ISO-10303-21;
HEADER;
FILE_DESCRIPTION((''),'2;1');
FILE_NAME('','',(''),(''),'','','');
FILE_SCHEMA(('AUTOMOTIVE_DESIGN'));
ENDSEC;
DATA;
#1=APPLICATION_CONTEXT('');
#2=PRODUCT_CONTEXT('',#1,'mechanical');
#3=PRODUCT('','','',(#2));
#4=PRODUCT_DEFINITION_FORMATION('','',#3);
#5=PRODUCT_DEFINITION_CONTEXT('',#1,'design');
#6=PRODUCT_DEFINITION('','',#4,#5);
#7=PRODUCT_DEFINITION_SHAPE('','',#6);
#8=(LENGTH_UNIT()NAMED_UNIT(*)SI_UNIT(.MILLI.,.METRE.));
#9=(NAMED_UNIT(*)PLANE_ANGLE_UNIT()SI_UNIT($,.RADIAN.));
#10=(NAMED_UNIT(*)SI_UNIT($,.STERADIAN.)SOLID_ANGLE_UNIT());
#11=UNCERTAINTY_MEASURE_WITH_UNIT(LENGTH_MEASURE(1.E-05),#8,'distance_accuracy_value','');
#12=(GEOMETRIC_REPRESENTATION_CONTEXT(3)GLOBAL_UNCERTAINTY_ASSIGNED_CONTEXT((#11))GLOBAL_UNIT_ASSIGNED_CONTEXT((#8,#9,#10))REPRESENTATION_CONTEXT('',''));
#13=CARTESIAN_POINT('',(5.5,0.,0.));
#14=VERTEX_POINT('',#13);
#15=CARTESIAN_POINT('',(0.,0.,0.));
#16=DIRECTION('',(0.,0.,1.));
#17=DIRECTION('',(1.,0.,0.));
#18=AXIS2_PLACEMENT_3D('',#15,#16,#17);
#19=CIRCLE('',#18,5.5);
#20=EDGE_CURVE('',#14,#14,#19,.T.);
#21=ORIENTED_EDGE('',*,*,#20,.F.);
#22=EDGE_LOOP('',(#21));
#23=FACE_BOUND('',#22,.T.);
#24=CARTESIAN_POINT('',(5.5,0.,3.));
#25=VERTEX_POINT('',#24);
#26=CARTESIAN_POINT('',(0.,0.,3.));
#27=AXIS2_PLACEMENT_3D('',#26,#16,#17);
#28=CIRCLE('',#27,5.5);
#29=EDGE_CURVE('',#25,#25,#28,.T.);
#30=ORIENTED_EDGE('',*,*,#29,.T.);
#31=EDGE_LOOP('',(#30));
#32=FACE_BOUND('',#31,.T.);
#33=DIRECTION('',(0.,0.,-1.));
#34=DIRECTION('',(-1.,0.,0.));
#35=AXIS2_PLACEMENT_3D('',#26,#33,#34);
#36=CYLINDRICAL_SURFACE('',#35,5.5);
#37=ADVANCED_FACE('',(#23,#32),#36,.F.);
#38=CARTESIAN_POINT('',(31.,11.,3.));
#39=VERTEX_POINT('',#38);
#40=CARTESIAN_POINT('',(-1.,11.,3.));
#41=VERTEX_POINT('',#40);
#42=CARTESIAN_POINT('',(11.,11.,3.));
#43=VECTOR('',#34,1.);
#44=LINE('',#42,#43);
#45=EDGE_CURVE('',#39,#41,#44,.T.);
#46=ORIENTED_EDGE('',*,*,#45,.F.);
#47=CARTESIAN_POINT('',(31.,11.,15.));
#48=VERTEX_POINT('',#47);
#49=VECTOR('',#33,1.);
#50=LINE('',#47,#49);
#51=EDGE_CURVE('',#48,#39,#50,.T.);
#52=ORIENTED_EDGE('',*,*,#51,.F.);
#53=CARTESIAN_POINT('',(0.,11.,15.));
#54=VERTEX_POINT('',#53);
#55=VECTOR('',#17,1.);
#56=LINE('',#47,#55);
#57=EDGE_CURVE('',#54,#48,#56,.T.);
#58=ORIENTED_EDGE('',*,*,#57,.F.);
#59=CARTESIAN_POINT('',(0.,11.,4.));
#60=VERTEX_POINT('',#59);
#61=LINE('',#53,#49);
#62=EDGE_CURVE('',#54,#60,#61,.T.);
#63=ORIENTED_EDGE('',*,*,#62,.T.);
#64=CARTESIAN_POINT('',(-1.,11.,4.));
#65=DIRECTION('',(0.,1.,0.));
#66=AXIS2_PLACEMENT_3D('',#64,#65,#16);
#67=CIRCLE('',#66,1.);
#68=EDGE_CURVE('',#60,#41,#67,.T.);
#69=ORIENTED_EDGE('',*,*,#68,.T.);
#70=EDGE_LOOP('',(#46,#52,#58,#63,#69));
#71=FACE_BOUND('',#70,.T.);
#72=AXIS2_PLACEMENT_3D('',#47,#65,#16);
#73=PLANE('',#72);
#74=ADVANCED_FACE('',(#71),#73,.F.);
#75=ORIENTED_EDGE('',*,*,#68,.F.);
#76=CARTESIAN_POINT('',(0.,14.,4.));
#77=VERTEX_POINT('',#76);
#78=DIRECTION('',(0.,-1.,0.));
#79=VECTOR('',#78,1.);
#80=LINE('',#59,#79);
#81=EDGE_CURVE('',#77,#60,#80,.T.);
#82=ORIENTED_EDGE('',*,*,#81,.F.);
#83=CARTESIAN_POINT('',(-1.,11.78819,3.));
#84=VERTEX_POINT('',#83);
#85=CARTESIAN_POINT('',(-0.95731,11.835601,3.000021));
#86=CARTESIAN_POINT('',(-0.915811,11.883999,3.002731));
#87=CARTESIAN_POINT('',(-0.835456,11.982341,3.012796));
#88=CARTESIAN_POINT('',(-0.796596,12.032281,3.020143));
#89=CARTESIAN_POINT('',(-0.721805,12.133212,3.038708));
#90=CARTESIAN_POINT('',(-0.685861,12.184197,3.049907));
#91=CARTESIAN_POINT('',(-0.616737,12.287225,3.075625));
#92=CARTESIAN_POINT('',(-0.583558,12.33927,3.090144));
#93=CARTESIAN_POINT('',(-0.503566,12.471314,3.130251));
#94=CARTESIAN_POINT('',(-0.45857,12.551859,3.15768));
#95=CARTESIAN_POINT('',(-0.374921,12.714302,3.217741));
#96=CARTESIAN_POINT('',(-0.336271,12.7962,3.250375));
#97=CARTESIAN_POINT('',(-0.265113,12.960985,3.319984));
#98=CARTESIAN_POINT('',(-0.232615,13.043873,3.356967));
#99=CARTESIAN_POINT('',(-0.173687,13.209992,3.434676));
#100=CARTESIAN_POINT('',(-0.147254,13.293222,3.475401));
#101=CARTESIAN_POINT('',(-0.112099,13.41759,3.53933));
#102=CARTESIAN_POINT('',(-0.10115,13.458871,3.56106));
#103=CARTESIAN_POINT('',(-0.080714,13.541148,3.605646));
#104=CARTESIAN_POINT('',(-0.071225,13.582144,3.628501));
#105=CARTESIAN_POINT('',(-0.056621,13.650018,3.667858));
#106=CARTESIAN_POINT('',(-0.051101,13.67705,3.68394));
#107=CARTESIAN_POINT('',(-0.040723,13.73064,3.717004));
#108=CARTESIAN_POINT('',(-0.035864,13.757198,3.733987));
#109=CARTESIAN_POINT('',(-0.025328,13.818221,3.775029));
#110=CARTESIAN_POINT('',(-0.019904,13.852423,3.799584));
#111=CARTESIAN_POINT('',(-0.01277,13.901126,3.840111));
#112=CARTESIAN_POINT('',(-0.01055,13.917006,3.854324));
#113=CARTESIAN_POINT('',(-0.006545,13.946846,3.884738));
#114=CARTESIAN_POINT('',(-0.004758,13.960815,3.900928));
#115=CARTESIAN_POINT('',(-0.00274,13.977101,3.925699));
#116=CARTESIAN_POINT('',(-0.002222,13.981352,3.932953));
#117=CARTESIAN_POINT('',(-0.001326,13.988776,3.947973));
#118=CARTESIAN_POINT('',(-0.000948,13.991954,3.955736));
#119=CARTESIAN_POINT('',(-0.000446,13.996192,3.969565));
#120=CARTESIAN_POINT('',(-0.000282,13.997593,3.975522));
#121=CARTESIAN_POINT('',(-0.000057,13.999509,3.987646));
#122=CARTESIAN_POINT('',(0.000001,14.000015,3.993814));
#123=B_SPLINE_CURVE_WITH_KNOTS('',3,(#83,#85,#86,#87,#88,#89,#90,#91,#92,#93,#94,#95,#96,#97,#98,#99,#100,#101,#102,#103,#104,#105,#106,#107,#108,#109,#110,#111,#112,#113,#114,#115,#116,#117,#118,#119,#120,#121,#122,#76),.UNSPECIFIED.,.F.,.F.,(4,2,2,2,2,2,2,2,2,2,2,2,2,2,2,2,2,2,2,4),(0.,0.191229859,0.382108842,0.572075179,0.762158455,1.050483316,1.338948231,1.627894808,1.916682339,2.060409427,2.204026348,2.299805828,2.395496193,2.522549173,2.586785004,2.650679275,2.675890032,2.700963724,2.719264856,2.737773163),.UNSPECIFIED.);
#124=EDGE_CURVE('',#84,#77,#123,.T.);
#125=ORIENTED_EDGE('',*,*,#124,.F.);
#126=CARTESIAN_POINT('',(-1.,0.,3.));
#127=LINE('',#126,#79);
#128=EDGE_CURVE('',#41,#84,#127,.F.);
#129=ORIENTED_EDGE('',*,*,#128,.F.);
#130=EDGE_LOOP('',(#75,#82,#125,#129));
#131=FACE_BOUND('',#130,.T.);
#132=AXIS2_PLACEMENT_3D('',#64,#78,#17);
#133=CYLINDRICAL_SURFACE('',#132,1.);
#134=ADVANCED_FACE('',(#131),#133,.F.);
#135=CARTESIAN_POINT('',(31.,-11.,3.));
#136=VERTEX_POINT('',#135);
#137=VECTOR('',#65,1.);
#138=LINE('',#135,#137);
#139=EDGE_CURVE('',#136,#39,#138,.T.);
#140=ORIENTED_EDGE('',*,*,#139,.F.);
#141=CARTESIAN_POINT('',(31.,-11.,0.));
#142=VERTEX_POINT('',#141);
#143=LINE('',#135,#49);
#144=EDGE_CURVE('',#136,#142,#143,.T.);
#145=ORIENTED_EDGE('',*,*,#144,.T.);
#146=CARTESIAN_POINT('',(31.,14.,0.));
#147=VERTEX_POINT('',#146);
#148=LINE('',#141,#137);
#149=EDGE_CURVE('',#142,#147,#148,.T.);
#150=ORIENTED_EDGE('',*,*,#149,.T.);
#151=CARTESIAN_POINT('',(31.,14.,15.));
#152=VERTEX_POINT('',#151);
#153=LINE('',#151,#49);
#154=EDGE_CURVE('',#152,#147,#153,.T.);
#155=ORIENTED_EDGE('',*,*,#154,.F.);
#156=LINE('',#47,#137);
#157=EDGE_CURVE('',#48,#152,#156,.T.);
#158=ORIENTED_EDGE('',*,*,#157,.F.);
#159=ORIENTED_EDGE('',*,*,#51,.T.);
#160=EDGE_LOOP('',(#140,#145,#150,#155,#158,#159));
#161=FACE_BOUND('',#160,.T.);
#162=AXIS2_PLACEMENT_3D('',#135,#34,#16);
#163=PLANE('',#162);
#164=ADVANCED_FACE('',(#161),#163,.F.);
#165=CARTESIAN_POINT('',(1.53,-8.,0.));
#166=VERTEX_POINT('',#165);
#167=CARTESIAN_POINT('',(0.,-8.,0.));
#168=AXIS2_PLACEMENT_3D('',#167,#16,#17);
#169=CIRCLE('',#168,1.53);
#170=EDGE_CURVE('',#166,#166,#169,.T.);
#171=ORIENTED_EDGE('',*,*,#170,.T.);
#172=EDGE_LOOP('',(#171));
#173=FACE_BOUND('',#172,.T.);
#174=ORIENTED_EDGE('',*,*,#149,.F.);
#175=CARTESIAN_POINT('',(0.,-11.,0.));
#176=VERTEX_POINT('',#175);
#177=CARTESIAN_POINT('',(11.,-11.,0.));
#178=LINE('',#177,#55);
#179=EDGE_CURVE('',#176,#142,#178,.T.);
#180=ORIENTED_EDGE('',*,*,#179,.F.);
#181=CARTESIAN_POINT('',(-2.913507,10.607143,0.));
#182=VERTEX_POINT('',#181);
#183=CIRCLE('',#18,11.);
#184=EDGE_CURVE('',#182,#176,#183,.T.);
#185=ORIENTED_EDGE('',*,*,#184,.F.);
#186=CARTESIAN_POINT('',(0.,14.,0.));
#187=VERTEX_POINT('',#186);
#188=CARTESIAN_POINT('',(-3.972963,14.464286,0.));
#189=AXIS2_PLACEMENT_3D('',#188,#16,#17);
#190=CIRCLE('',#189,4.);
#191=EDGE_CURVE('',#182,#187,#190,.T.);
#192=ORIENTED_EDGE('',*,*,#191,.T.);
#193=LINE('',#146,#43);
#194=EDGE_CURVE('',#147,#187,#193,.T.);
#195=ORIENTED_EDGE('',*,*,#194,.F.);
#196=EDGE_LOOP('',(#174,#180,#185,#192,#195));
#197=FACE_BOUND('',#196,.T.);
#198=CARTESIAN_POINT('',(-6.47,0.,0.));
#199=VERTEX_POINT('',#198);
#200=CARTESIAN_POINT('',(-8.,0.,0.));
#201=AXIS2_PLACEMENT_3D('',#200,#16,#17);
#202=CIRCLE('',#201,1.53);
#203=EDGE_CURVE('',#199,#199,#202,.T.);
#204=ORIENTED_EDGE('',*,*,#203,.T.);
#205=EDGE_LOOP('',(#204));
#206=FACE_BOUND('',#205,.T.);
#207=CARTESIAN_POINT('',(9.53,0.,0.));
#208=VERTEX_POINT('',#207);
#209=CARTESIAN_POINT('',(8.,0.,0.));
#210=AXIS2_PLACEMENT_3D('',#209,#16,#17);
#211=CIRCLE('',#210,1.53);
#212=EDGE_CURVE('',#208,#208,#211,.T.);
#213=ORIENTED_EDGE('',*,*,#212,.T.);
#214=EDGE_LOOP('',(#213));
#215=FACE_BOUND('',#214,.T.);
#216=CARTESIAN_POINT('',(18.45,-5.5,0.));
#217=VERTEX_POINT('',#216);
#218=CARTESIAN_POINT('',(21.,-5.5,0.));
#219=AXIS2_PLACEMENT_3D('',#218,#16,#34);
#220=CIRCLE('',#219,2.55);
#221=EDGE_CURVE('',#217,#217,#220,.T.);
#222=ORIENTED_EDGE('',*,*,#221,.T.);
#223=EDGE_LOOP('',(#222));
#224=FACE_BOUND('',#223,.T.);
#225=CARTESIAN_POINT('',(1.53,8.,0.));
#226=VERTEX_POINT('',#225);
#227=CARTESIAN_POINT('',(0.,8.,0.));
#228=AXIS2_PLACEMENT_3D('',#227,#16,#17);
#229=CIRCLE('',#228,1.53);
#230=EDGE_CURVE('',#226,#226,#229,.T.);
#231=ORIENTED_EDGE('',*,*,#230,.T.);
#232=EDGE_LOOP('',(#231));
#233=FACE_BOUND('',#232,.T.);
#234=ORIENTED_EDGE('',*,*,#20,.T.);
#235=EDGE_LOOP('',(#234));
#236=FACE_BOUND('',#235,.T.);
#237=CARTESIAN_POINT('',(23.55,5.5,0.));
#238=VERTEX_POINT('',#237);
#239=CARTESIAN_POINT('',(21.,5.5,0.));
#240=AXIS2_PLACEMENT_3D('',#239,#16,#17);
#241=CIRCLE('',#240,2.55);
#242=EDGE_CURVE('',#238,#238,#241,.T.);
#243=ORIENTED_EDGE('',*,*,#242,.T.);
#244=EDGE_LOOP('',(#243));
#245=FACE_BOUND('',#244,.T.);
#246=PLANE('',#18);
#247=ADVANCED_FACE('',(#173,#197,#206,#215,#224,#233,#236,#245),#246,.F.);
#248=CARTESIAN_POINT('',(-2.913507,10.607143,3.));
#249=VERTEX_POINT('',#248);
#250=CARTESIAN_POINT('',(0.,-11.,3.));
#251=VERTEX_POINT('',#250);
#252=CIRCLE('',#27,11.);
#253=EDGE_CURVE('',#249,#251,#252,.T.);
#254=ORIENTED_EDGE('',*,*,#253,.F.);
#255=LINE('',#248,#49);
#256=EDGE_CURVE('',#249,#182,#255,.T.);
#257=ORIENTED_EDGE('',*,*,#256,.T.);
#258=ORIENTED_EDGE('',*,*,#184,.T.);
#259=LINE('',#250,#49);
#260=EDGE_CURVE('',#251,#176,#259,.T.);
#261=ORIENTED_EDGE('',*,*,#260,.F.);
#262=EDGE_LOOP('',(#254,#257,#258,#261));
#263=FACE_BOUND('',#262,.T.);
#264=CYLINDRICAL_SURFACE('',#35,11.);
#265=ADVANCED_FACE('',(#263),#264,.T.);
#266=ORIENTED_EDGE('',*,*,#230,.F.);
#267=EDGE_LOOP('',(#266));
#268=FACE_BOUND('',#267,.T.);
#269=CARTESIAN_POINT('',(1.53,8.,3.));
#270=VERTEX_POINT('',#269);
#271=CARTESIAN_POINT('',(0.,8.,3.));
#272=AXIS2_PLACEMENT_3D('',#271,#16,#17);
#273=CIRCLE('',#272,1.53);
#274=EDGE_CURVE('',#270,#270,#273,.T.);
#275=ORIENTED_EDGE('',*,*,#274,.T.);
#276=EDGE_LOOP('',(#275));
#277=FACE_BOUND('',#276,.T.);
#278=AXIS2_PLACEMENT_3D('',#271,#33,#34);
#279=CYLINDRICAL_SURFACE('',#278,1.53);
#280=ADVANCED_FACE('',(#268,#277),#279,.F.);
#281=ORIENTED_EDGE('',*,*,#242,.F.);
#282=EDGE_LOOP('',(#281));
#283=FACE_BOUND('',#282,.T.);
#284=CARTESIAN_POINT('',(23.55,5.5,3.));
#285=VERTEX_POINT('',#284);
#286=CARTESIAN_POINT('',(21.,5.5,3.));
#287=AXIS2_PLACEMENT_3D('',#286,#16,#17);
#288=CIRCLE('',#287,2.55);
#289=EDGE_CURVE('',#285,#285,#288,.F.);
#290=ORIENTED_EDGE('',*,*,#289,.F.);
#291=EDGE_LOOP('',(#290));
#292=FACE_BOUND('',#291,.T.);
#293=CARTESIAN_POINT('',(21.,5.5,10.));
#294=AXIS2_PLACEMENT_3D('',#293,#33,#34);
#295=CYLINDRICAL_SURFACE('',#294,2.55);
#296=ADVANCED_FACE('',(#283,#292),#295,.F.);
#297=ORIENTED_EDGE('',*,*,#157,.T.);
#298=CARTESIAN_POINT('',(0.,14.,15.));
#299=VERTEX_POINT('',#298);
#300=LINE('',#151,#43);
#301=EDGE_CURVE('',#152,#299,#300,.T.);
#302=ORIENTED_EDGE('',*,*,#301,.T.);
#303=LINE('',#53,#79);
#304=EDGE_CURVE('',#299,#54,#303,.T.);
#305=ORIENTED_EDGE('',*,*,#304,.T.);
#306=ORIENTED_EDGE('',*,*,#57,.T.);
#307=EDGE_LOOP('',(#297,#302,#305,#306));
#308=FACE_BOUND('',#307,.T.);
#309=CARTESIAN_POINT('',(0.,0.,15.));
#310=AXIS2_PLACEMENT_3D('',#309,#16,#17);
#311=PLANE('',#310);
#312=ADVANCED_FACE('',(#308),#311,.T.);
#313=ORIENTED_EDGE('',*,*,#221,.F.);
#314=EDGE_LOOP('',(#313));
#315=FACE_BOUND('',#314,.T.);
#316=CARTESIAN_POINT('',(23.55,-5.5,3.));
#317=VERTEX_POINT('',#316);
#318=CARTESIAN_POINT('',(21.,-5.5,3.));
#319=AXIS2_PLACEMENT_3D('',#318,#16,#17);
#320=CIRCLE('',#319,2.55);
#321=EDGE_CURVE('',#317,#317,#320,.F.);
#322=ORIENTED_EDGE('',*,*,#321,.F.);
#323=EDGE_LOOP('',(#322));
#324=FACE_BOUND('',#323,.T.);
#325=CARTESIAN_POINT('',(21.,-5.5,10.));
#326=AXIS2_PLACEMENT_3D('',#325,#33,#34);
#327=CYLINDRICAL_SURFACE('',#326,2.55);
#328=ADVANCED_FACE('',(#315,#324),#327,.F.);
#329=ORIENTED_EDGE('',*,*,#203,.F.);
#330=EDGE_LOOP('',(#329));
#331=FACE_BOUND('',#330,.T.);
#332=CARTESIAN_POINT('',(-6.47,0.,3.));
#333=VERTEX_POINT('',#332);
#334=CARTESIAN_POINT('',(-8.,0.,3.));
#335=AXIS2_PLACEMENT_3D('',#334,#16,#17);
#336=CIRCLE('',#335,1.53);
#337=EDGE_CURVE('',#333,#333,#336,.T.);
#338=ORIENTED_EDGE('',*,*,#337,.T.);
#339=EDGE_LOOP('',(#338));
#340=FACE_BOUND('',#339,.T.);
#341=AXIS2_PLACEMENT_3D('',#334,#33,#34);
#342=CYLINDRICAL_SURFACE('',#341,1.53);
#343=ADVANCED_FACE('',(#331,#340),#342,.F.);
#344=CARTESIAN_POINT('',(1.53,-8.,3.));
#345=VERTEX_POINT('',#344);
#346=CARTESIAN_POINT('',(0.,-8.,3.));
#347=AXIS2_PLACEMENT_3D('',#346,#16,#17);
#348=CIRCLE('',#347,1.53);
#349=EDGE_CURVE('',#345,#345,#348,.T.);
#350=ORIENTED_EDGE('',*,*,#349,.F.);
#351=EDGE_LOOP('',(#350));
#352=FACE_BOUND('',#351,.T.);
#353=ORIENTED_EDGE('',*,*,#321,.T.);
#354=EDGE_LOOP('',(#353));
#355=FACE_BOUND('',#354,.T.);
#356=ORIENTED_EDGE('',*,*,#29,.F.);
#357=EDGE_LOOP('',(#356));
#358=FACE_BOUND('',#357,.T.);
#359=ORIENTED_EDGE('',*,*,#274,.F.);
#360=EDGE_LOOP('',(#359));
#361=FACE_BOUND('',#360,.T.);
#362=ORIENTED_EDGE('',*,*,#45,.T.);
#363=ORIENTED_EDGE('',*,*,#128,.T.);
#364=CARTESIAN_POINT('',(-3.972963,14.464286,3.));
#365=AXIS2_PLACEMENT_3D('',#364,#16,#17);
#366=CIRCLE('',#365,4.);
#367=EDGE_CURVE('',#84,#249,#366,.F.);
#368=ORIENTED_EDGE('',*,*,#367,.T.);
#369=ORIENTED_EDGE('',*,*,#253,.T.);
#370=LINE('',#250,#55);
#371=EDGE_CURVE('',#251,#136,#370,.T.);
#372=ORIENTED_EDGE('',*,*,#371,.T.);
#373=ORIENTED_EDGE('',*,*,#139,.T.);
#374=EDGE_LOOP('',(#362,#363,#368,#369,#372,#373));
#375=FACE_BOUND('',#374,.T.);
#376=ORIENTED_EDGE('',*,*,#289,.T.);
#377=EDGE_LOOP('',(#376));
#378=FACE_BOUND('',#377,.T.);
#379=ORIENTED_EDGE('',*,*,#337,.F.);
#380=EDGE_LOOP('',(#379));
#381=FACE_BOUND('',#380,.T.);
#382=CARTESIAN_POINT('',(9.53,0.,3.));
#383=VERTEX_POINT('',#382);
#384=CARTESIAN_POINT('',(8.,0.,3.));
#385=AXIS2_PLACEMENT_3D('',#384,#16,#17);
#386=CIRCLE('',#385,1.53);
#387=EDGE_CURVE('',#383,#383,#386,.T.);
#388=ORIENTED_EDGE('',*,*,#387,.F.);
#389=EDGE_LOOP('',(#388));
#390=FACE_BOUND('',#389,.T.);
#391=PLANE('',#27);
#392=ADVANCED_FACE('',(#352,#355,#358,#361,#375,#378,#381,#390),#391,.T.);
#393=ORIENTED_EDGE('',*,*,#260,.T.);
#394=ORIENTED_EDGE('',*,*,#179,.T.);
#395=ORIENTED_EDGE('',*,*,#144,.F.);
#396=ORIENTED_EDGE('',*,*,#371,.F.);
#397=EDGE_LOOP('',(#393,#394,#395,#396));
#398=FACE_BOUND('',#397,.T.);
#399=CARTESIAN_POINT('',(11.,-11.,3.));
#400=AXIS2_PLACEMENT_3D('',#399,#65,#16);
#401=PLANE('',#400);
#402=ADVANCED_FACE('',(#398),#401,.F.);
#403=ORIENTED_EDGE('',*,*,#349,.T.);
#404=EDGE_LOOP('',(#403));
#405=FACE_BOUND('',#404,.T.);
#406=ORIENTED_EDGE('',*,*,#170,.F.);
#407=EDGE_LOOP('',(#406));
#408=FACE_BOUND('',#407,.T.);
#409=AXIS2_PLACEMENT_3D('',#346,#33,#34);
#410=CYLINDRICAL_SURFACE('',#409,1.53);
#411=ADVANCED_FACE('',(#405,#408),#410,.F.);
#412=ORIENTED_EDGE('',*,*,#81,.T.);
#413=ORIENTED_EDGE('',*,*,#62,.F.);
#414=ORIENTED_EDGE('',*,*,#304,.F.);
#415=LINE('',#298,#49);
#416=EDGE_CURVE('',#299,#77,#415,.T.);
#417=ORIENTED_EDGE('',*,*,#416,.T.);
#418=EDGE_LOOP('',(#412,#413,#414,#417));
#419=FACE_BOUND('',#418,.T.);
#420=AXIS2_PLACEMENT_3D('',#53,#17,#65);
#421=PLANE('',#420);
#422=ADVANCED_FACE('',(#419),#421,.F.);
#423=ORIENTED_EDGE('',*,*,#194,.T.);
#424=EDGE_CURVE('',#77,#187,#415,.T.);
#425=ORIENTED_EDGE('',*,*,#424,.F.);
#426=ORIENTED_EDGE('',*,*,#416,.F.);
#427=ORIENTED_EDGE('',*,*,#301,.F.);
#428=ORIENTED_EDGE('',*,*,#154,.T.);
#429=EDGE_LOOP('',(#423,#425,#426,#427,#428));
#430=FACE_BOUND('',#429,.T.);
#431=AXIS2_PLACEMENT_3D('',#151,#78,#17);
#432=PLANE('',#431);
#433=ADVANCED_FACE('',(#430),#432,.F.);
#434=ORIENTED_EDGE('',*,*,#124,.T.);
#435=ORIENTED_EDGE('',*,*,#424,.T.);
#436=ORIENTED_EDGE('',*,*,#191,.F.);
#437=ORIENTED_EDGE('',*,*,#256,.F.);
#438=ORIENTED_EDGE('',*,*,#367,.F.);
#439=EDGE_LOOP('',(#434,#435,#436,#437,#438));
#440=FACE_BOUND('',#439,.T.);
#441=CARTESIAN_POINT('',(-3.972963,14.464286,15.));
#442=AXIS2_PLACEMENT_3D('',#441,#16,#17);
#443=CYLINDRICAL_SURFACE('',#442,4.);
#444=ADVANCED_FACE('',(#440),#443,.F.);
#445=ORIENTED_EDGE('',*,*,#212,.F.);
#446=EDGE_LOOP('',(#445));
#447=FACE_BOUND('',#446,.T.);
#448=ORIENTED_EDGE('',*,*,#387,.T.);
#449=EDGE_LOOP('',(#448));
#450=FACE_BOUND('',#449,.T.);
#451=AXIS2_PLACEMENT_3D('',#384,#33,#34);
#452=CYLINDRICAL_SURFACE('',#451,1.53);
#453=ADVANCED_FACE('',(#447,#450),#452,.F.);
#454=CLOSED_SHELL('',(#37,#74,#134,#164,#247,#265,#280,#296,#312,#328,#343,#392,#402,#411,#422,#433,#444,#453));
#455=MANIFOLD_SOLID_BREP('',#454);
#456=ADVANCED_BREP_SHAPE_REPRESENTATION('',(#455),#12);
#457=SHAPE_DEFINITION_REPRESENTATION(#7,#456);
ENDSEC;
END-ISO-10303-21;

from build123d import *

# Parameters (mm, degrees)
SKETCH1_R           = 1.53
SKETCH1_R_2         = 5.5
BOSS_EXTRUDE1_DEPTH = 3
SKETCH2_R           = 2.55
CUT_EXTRUDE1_DEPTH  = 10
SKETCH4_W           = 31
SKETCH4_H           = 3
BOSS_EXTRUDE2_DEPTH = 15
FILLET1_R           = 4
FILLET4_R           = 1


with BuildPart() as part:
    # Sketch1 → Boss-Extrude1 (new body)
    with BuildSketch(Plane.XY):
        with BuildLine():
            Line((0, -11), (11, -11))
            Line((11, -11), (31, -11))
            Line((31, -11), (31, 11))
            Line((31, 11), (11, 11))
            Line((11, 11), (0, 11))
            ThreePointArc((0, 11), (-11, 0), (0, -11))
        make_face()
        with Locations((0, 8)):
            Circle(SKETCH1_R, mode=Mode.SUBTRACT)
        with Locations((8, 0)):
            Circle(SKETCH1_R, mode=Mode.SUBTRACT)
        with Locations((0, -8)):
            Circle(SKETCH1_R, mode=Mode.SUBTRACT)
        with Locations((-8, 0)):
            Circle(SKETCH1_R, mode=Mode.SUBTRACT)
        Circle(SKETCH1_R_2, mode=Mode.SUBTRACT)
    extrude(amount=BOSS_EXTRUDE1_DEPTH)

    # Sketch2 → Cut-Extrude1 (cut)
    with BuildSketch(Plane.XY):
        with Locations((21, 5.5)):
            Circle(SKETCH2_R)
        with Locations(Location((21, -5.5, 0), (0, 0, 180))):
            Circle(SKETCH2_R)
    extrude(amount=CUT_EXTRUDE1_DEPTH, mode=Mode.SUBTRACT)

    # Sketch4 → Boss-Extrude2 (add)
    with BuildSketch(Plane.XY):
        with Locations((15.5, 12.5)):
            Rectangle(SKETCH4_W, SKETCH4_H)
    extrude(amount=BOSS_EXTRUDE2_DEPTH)

    # Fillet1
    # the kernel refuses this fillet: 4 mm, written as the material it adds along each edge
    with BuildSketch(Plane(origin=(0, 11, 0), x_dir=(0, 1, 0), z_dir=(0, 0, 1))) as fillet1_piece_1:
        with BuildLine():
            CenterArc((3.464285714, 3.972963475), FILLET1_R, 195.358885581, 67.975687163)
            ThreePointArc((-0.392857143, 2.913506549), (-0.098656701, 1.469936831), (0, 0))
            Line((0, 0), (3, 0))
        make_face()
    extrude(amount=3)

    # Fillet4
    # the kernel refuses this fillet: 1 mm, written as the material it adds along each edge
    with BuildSketch(Plane(origin=(0, 11, 3), x_dir=(-1, 0, 0), z_dir=(0, 1, 0))) as fillet4_piece_1_section:
        with BuildLine():
            CenterArc((FILLET4_R, FILLET4_R), FILLET4_R, 180, 90)
            Line((0, FILLET4_R), (0, 0))
            Line((0, 0), (FILLET4_R, 0))
        make_face()
    fillet4_piece_1 = extrude(amount=3, mode=Mode.PRIVATE)
    fillet4_piece_1 = fillet4_piece_1 - Plane(origin=(-3.972963475, 14.464285714, 3.249866194), x_dir=(0, 1, 0), z_dir=(0, 0, -1)) * Cylinder(4, 10, mode=Mode.PRIVATE)
    add(fillet4_piece_1)


solid = part.part
